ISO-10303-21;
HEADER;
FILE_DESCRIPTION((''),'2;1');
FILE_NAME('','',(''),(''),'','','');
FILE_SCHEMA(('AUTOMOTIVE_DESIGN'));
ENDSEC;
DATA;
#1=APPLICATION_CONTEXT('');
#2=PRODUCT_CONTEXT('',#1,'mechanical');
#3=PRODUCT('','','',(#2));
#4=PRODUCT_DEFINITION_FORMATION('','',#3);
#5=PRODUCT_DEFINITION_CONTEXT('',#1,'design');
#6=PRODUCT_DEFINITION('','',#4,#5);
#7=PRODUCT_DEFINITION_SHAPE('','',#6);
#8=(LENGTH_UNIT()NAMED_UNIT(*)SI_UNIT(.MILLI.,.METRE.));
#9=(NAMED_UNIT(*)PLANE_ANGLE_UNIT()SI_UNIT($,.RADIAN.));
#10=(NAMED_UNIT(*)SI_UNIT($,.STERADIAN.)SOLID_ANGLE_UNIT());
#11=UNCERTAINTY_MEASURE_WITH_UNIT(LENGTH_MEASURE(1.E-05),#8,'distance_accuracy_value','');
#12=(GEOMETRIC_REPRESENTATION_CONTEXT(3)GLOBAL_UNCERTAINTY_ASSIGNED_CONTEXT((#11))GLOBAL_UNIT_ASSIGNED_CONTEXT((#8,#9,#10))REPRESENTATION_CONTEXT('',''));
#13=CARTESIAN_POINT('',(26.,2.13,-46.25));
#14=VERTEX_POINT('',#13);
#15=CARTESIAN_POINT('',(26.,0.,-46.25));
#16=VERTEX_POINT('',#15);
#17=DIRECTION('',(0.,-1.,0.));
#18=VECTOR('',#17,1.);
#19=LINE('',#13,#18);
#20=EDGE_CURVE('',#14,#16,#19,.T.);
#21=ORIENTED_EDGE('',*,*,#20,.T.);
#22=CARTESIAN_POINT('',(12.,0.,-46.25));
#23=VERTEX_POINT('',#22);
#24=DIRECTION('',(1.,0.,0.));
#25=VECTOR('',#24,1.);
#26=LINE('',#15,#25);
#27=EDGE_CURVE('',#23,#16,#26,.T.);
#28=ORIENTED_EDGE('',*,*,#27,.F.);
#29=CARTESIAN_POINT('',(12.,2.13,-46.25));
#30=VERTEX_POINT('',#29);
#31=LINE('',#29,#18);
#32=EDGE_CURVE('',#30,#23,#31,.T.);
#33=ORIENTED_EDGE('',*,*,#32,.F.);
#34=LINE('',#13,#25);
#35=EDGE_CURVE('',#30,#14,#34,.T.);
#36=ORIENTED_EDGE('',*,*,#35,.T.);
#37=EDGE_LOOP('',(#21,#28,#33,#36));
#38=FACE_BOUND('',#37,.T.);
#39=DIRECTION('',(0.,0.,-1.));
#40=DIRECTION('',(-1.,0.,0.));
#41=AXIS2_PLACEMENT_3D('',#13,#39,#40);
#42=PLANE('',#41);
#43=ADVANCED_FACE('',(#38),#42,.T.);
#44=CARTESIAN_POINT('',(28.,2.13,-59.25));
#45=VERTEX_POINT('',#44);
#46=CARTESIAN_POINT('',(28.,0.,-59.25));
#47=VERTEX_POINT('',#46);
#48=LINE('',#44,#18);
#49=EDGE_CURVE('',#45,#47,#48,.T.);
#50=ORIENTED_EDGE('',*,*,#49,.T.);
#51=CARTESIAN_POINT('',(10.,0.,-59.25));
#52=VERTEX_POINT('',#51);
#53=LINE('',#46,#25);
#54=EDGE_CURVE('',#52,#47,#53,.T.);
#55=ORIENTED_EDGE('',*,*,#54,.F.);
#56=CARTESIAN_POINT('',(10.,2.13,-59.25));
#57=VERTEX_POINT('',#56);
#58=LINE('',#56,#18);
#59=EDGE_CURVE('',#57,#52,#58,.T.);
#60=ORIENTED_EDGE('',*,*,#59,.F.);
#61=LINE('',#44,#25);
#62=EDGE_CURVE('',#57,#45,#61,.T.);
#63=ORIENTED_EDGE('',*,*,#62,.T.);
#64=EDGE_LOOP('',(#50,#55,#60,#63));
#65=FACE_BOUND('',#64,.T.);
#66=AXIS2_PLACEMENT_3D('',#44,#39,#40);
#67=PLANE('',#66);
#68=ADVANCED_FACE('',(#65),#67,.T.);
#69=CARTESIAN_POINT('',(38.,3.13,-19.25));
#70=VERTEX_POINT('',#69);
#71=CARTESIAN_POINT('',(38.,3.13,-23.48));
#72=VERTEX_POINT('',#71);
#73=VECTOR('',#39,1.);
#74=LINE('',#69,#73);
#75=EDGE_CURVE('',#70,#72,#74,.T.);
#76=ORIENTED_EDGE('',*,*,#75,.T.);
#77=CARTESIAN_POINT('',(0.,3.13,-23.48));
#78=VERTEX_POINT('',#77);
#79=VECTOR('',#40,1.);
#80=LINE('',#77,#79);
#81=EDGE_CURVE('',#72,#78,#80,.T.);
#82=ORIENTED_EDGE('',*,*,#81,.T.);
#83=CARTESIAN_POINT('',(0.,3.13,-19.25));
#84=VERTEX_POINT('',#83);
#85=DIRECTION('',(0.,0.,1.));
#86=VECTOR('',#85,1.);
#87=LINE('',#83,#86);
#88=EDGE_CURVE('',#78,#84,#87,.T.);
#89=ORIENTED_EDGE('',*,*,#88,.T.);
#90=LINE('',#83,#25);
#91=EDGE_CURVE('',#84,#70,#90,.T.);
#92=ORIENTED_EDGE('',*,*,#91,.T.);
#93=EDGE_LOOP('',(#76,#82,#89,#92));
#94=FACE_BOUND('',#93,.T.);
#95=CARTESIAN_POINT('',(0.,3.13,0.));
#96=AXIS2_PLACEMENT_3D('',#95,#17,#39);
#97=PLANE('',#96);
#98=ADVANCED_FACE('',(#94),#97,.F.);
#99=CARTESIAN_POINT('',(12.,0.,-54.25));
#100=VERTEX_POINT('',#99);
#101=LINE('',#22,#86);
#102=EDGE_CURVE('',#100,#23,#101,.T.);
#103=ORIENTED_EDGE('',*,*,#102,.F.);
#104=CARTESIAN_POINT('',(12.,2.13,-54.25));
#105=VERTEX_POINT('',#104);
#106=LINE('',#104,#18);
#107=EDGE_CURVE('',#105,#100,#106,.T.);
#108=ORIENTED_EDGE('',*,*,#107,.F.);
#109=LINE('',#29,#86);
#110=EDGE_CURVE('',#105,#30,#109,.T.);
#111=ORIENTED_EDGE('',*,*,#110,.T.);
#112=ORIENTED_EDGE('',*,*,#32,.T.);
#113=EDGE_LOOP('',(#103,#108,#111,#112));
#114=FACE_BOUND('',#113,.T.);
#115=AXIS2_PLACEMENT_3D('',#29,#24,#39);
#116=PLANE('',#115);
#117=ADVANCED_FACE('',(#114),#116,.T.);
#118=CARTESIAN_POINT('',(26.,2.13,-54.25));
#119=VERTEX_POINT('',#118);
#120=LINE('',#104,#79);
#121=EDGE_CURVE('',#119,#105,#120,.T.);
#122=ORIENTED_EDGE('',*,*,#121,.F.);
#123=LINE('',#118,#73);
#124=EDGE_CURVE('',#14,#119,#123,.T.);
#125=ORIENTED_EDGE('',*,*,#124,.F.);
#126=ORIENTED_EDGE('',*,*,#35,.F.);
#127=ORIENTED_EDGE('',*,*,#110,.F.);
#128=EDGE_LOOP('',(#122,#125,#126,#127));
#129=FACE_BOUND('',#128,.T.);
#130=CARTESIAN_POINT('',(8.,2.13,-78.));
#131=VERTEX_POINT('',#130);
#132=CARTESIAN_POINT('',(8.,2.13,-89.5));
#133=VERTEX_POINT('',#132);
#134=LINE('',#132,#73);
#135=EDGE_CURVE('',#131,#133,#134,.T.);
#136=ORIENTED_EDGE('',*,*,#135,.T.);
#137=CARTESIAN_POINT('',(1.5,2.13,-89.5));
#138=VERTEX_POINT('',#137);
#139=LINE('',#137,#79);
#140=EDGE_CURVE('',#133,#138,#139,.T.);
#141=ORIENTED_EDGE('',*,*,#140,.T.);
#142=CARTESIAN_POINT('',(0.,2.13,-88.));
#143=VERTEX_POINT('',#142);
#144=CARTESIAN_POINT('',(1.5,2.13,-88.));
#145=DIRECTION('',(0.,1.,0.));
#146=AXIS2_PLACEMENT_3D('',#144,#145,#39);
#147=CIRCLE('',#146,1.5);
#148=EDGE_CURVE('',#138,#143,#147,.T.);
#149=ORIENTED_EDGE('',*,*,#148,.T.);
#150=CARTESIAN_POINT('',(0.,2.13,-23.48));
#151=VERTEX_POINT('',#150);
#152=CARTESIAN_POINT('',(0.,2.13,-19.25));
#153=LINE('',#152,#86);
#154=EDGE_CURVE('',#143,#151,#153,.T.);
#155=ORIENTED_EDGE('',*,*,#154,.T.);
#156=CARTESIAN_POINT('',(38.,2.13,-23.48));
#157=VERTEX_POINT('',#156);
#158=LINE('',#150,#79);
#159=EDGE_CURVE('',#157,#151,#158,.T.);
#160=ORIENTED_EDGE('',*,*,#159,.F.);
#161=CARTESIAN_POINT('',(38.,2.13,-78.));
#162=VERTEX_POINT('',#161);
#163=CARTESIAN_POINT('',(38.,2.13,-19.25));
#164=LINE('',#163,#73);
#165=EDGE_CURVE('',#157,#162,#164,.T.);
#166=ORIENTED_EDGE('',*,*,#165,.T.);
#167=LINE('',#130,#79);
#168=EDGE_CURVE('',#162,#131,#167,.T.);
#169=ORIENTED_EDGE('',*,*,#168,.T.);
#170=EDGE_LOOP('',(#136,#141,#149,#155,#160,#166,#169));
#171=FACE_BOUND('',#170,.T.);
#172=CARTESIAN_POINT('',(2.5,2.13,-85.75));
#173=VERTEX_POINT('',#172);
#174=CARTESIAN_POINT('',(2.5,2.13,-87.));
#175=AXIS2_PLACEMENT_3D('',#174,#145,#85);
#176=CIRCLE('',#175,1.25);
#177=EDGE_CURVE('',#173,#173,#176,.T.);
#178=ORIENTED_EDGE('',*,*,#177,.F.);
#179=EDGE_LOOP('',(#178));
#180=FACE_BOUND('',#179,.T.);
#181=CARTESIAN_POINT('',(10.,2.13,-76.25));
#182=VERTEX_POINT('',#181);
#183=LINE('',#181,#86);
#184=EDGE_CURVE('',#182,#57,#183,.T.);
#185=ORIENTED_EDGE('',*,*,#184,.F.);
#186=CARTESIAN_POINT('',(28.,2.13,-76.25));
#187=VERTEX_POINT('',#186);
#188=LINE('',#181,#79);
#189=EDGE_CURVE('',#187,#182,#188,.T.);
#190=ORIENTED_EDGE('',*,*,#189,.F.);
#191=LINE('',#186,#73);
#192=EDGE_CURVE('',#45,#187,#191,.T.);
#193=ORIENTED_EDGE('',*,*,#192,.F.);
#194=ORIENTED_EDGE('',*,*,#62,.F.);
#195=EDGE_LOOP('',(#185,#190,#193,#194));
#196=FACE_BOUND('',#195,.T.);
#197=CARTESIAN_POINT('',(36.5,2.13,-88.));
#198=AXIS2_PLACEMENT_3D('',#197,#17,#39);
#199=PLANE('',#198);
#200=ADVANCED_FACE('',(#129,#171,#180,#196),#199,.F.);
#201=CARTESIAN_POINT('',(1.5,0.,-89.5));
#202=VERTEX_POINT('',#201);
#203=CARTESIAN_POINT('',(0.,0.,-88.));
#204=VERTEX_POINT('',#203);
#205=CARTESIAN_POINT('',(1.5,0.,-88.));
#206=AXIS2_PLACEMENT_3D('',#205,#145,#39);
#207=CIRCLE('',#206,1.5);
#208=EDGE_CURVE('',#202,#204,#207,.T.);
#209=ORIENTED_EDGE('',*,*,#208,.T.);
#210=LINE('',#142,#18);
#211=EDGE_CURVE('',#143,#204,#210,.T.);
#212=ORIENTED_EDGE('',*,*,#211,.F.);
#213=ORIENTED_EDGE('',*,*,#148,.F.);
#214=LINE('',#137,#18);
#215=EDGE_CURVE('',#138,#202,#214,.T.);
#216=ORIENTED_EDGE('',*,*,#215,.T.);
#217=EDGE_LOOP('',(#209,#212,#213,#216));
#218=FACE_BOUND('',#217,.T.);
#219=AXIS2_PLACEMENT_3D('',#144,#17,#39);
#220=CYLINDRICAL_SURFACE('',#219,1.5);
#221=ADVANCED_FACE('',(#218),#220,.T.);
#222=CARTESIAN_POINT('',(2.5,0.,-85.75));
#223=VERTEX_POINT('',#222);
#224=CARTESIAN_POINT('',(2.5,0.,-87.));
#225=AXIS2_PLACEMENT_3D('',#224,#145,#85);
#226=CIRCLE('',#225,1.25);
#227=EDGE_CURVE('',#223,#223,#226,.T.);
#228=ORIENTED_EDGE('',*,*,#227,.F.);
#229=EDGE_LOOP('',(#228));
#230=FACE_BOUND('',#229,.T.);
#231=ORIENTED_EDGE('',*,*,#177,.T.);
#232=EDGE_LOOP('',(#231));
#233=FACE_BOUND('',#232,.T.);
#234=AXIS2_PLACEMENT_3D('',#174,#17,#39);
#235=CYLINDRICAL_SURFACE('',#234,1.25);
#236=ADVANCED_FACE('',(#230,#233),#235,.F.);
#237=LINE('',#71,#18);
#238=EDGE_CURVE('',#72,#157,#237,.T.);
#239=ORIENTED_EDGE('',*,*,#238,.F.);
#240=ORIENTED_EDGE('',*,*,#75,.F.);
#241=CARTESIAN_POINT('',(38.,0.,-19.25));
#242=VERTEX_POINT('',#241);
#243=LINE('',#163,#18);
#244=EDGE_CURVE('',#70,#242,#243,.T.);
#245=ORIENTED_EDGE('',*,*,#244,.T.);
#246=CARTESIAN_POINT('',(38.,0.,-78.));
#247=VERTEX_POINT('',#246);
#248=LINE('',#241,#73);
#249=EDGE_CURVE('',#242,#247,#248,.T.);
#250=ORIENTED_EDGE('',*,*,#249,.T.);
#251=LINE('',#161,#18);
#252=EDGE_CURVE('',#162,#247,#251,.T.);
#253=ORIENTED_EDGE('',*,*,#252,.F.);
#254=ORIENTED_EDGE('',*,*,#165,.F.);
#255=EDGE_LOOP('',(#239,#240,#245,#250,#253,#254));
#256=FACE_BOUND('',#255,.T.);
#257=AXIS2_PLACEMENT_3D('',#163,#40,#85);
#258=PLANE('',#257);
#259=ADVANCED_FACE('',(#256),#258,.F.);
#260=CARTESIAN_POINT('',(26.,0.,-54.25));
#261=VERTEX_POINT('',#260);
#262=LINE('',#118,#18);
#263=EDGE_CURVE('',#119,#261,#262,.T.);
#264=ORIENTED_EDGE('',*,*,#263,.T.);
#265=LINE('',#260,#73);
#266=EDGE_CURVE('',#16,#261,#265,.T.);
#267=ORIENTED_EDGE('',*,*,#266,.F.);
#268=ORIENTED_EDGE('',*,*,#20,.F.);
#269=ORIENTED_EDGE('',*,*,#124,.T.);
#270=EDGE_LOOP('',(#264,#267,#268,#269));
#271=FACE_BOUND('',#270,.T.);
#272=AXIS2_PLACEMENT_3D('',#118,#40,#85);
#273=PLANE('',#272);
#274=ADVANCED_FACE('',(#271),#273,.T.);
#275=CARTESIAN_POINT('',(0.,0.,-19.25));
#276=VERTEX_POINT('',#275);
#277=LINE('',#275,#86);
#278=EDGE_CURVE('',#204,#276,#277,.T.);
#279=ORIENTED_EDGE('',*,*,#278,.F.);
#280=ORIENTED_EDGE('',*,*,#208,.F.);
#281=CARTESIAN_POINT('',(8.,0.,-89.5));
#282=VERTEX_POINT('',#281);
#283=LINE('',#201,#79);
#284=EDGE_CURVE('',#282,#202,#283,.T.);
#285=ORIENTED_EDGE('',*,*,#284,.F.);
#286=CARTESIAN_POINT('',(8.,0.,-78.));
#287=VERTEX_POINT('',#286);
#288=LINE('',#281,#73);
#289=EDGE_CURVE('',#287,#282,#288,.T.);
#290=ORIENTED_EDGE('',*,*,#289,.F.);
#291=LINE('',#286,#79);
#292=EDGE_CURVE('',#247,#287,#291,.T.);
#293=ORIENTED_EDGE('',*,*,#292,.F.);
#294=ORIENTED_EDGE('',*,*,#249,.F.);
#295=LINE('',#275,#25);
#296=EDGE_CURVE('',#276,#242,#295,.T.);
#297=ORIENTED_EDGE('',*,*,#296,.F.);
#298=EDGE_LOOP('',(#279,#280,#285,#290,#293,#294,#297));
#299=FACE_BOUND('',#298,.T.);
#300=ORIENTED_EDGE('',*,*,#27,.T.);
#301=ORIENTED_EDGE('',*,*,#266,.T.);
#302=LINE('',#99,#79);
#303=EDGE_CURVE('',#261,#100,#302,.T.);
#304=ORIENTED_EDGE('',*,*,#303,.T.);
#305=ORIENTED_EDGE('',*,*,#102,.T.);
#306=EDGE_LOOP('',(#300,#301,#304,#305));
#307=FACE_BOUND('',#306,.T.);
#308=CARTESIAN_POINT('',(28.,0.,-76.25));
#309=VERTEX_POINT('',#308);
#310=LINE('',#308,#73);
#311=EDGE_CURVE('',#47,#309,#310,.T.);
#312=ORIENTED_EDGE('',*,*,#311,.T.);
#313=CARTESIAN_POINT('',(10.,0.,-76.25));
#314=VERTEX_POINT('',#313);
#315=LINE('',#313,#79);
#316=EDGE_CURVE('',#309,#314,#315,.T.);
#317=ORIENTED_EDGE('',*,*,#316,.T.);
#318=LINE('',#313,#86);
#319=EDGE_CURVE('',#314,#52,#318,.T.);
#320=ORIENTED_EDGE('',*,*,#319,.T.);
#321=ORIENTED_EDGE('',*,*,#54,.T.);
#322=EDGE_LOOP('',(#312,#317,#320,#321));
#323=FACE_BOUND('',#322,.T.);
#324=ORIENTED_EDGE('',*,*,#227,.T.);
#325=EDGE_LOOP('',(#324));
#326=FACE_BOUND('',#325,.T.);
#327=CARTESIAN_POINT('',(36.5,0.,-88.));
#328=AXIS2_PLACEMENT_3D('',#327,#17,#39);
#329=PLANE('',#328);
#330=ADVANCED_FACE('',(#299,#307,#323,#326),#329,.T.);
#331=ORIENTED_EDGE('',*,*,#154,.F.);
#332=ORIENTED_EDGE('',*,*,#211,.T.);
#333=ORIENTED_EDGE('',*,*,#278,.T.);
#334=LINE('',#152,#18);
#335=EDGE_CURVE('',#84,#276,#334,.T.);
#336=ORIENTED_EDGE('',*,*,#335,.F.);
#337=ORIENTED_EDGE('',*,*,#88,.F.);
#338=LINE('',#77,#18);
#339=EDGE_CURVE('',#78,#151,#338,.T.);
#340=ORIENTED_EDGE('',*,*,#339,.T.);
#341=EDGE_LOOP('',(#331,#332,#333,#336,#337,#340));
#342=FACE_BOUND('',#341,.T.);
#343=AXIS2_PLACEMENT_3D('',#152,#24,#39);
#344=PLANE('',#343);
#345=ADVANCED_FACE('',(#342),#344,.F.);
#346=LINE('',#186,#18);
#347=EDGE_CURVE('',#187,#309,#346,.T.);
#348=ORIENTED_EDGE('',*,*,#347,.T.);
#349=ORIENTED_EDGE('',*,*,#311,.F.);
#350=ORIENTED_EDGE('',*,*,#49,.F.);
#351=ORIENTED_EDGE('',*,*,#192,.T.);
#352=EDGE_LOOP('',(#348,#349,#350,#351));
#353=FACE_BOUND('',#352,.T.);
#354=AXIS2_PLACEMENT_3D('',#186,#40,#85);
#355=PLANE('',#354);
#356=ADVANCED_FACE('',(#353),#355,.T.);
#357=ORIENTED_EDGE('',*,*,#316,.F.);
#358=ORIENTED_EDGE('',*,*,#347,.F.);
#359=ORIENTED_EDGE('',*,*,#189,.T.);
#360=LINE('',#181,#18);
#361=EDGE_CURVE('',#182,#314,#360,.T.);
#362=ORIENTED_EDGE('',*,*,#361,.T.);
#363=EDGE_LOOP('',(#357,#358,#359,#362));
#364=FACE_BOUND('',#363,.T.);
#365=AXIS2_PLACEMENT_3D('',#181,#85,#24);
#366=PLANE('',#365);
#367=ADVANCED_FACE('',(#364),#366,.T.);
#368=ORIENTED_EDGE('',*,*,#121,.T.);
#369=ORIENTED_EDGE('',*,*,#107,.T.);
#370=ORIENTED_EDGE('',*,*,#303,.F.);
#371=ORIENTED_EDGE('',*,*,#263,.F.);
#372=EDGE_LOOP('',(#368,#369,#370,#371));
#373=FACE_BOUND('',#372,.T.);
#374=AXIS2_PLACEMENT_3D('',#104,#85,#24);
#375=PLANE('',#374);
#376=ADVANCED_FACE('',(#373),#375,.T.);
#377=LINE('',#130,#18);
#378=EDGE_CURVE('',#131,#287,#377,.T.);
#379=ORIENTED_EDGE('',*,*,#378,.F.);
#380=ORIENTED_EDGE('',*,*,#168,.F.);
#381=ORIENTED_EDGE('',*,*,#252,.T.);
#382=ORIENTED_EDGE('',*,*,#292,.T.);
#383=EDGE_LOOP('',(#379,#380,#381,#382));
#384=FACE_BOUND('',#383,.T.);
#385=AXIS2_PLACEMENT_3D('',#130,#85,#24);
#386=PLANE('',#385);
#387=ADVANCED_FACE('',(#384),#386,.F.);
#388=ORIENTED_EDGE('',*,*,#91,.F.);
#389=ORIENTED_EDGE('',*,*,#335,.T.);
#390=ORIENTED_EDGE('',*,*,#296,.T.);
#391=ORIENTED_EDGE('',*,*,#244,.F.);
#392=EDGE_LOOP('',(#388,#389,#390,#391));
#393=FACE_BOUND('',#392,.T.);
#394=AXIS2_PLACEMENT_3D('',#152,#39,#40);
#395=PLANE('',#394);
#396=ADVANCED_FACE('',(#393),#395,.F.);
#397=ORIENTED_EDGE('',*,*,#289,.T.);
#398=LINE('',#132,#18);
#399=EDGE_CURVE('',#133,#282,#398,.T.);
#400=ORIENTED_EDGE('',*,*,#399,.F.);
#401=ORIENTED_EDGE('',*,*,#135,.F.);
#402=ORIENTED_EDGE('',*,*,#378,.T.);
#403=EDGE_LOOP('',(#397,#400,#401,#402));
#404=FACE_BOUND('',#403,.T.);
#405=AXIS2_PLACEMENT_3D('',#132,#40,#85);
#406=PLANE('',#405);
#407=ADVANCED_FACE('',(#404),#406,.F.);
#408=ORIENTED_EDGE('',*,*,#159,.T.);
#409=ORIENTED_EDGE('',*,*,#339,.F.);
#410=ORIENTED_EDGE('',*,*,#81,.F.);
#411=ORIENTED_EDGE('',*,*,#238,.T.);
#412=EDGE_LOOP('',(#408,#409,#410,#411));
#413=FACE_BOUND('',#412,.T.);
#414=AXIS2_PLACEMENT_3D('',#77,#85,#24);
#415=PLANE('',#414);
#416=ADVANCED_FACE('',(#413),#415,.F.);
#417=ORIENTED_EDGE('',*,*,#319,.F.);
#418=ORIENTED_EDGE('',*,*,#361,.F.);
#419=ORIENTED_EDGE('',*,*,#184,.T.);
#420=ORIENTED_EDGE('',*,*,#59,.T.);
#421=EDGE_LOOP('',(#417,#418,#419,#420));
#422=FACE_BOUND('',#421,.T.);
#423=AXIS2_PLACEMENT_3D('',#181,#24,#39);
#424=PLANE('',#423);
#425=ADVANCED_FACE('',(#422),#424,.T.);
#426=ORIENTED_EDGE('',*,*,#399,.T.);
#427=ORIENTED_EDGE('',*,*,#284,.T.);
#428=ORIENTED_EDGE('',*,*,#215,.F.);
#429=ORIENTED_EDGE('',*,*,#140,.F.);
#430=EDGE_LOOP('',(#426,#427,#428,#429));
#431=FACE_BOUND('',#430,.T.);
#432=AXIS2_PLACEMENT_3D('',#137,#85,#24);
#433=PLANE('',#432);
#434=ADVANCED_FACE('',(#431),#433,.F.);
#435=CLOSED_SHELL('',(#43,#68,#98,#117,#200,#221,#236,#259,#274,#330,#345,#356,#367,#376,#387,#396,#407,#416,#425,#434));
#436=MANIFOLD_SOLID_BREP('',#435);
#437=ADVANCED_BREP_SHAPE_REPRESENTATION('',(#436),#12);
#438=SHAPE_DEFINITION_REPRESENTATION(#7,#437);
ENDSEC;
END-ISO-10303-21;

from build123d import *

# Parameters (mm, degrees)
BOSS_EXTRUDE1_OUTLINE_W   = 14
BOSS_EXTRUDE1_OUTLINE_H   = 8
BOSS_EXTRUDE1_OUTLINE_R   = 1.25
BOSS_EXTRUDE1_OUTLINE_W_2 = 18
BOSS_EXTRUDE1_OUTLINE_H_2 = 17
BOSS_EXTRUDE1_DEPTH       = 2.13
SKETCH2_W                 = 38
SKETCH2_H                 = 4.23
BOSS_EXTRUDE2_DEPTH       = 1
SKETCH3_W                 = 8
SKETCH3_H                 = 2.13
CUT_EXTRUDE1_DEPTH        = 11.5


# Read off the part's stored shape, not the designer's step: Boss-Extrude1
with BuildPart() as part:
    # Boss-Extrude1 outline → Boss-Extrude1 (new body)
    with BuildSketch(Plane(origin=(0, 0, 0), x_dir=(1, 0, 0), z_dir=(0, 1, 0))):
        with BuildLine():
            ThreePointArc((38, 88), (37.560660172, 89.060660172), (36.5, 89.5))
            Line((36.5, 89.5), (30, 89.5))
            Line((30, 89.5), (30, 78))
            Line((30, 78), (8, 78))
            Line((8, 78), (8, 89.5))
            Line((8, 89.5), (1.5, 89.5))
            ThreePointArc((1.5, 89.5), (0.439339828, 89.060660172), (0, 88))
            Line((0, 88), (0, 19.25))
            Line((0, 19.25), (38, 19.25))
            Line((38, 19.25), (38, 88))
        make_face()
        with Locations((19, 50.25)):
            Rectangle(BOSS_EXTRUDE1_OUTLINE_W, BOSS_EXTRUDE1_OUTLINE_H, mode=Mode.SUBTRACT)
        with Locations((2.5, 87)):
            Circle(BOSS_EXTRUDE1_OUTLINE_R, mode=Mode.SUBTRACT)
        with Locations((19, 67.75)):
            Rectangle(BOSS_EXTRUDE1_OUTLINE_W_2, BOSS_EXTRUDE1_OUTLINE_H_2, mode=Mode.SUBTRACT)
        with Locations((35.5, 87)):
            Circle(BOSS_EXTRUDE1_OUTLINE_R, mode=Mode.SUBTRACT)
    extrude(amount=BOSS_EXTRUDE1_DEPTH)

    # Sketch2 → Boss-Extrude2 (add)
    with BuildSketch(Plane(origin=(0, 2.13, 0), x_dir=(1, 0, 0), z_dir=(0, 1, 0))):
        with Locations((19, 21.365)):
            Rectangle(SKETCH2_W, SKETCH2_H)
    extrude(amount=BOSS_EXTRUDE2_DEPTH)

    # Sketch3 → Cut-Extrude1 (cut)
    with BuildSketch(Plane(origin=(0, 0, -89.5), x_dir=(-1, 0, 0), z_dir=(0, 0, -1))):
        with Locations((-34, 1.065)):
            Rectangle(SKETCH3_W, SKETCH3_H)
    extrude(amount=-CUT_EXTRUDE1_DEPTH, mode=Mode.SUBTRACT)


solid = part.part
